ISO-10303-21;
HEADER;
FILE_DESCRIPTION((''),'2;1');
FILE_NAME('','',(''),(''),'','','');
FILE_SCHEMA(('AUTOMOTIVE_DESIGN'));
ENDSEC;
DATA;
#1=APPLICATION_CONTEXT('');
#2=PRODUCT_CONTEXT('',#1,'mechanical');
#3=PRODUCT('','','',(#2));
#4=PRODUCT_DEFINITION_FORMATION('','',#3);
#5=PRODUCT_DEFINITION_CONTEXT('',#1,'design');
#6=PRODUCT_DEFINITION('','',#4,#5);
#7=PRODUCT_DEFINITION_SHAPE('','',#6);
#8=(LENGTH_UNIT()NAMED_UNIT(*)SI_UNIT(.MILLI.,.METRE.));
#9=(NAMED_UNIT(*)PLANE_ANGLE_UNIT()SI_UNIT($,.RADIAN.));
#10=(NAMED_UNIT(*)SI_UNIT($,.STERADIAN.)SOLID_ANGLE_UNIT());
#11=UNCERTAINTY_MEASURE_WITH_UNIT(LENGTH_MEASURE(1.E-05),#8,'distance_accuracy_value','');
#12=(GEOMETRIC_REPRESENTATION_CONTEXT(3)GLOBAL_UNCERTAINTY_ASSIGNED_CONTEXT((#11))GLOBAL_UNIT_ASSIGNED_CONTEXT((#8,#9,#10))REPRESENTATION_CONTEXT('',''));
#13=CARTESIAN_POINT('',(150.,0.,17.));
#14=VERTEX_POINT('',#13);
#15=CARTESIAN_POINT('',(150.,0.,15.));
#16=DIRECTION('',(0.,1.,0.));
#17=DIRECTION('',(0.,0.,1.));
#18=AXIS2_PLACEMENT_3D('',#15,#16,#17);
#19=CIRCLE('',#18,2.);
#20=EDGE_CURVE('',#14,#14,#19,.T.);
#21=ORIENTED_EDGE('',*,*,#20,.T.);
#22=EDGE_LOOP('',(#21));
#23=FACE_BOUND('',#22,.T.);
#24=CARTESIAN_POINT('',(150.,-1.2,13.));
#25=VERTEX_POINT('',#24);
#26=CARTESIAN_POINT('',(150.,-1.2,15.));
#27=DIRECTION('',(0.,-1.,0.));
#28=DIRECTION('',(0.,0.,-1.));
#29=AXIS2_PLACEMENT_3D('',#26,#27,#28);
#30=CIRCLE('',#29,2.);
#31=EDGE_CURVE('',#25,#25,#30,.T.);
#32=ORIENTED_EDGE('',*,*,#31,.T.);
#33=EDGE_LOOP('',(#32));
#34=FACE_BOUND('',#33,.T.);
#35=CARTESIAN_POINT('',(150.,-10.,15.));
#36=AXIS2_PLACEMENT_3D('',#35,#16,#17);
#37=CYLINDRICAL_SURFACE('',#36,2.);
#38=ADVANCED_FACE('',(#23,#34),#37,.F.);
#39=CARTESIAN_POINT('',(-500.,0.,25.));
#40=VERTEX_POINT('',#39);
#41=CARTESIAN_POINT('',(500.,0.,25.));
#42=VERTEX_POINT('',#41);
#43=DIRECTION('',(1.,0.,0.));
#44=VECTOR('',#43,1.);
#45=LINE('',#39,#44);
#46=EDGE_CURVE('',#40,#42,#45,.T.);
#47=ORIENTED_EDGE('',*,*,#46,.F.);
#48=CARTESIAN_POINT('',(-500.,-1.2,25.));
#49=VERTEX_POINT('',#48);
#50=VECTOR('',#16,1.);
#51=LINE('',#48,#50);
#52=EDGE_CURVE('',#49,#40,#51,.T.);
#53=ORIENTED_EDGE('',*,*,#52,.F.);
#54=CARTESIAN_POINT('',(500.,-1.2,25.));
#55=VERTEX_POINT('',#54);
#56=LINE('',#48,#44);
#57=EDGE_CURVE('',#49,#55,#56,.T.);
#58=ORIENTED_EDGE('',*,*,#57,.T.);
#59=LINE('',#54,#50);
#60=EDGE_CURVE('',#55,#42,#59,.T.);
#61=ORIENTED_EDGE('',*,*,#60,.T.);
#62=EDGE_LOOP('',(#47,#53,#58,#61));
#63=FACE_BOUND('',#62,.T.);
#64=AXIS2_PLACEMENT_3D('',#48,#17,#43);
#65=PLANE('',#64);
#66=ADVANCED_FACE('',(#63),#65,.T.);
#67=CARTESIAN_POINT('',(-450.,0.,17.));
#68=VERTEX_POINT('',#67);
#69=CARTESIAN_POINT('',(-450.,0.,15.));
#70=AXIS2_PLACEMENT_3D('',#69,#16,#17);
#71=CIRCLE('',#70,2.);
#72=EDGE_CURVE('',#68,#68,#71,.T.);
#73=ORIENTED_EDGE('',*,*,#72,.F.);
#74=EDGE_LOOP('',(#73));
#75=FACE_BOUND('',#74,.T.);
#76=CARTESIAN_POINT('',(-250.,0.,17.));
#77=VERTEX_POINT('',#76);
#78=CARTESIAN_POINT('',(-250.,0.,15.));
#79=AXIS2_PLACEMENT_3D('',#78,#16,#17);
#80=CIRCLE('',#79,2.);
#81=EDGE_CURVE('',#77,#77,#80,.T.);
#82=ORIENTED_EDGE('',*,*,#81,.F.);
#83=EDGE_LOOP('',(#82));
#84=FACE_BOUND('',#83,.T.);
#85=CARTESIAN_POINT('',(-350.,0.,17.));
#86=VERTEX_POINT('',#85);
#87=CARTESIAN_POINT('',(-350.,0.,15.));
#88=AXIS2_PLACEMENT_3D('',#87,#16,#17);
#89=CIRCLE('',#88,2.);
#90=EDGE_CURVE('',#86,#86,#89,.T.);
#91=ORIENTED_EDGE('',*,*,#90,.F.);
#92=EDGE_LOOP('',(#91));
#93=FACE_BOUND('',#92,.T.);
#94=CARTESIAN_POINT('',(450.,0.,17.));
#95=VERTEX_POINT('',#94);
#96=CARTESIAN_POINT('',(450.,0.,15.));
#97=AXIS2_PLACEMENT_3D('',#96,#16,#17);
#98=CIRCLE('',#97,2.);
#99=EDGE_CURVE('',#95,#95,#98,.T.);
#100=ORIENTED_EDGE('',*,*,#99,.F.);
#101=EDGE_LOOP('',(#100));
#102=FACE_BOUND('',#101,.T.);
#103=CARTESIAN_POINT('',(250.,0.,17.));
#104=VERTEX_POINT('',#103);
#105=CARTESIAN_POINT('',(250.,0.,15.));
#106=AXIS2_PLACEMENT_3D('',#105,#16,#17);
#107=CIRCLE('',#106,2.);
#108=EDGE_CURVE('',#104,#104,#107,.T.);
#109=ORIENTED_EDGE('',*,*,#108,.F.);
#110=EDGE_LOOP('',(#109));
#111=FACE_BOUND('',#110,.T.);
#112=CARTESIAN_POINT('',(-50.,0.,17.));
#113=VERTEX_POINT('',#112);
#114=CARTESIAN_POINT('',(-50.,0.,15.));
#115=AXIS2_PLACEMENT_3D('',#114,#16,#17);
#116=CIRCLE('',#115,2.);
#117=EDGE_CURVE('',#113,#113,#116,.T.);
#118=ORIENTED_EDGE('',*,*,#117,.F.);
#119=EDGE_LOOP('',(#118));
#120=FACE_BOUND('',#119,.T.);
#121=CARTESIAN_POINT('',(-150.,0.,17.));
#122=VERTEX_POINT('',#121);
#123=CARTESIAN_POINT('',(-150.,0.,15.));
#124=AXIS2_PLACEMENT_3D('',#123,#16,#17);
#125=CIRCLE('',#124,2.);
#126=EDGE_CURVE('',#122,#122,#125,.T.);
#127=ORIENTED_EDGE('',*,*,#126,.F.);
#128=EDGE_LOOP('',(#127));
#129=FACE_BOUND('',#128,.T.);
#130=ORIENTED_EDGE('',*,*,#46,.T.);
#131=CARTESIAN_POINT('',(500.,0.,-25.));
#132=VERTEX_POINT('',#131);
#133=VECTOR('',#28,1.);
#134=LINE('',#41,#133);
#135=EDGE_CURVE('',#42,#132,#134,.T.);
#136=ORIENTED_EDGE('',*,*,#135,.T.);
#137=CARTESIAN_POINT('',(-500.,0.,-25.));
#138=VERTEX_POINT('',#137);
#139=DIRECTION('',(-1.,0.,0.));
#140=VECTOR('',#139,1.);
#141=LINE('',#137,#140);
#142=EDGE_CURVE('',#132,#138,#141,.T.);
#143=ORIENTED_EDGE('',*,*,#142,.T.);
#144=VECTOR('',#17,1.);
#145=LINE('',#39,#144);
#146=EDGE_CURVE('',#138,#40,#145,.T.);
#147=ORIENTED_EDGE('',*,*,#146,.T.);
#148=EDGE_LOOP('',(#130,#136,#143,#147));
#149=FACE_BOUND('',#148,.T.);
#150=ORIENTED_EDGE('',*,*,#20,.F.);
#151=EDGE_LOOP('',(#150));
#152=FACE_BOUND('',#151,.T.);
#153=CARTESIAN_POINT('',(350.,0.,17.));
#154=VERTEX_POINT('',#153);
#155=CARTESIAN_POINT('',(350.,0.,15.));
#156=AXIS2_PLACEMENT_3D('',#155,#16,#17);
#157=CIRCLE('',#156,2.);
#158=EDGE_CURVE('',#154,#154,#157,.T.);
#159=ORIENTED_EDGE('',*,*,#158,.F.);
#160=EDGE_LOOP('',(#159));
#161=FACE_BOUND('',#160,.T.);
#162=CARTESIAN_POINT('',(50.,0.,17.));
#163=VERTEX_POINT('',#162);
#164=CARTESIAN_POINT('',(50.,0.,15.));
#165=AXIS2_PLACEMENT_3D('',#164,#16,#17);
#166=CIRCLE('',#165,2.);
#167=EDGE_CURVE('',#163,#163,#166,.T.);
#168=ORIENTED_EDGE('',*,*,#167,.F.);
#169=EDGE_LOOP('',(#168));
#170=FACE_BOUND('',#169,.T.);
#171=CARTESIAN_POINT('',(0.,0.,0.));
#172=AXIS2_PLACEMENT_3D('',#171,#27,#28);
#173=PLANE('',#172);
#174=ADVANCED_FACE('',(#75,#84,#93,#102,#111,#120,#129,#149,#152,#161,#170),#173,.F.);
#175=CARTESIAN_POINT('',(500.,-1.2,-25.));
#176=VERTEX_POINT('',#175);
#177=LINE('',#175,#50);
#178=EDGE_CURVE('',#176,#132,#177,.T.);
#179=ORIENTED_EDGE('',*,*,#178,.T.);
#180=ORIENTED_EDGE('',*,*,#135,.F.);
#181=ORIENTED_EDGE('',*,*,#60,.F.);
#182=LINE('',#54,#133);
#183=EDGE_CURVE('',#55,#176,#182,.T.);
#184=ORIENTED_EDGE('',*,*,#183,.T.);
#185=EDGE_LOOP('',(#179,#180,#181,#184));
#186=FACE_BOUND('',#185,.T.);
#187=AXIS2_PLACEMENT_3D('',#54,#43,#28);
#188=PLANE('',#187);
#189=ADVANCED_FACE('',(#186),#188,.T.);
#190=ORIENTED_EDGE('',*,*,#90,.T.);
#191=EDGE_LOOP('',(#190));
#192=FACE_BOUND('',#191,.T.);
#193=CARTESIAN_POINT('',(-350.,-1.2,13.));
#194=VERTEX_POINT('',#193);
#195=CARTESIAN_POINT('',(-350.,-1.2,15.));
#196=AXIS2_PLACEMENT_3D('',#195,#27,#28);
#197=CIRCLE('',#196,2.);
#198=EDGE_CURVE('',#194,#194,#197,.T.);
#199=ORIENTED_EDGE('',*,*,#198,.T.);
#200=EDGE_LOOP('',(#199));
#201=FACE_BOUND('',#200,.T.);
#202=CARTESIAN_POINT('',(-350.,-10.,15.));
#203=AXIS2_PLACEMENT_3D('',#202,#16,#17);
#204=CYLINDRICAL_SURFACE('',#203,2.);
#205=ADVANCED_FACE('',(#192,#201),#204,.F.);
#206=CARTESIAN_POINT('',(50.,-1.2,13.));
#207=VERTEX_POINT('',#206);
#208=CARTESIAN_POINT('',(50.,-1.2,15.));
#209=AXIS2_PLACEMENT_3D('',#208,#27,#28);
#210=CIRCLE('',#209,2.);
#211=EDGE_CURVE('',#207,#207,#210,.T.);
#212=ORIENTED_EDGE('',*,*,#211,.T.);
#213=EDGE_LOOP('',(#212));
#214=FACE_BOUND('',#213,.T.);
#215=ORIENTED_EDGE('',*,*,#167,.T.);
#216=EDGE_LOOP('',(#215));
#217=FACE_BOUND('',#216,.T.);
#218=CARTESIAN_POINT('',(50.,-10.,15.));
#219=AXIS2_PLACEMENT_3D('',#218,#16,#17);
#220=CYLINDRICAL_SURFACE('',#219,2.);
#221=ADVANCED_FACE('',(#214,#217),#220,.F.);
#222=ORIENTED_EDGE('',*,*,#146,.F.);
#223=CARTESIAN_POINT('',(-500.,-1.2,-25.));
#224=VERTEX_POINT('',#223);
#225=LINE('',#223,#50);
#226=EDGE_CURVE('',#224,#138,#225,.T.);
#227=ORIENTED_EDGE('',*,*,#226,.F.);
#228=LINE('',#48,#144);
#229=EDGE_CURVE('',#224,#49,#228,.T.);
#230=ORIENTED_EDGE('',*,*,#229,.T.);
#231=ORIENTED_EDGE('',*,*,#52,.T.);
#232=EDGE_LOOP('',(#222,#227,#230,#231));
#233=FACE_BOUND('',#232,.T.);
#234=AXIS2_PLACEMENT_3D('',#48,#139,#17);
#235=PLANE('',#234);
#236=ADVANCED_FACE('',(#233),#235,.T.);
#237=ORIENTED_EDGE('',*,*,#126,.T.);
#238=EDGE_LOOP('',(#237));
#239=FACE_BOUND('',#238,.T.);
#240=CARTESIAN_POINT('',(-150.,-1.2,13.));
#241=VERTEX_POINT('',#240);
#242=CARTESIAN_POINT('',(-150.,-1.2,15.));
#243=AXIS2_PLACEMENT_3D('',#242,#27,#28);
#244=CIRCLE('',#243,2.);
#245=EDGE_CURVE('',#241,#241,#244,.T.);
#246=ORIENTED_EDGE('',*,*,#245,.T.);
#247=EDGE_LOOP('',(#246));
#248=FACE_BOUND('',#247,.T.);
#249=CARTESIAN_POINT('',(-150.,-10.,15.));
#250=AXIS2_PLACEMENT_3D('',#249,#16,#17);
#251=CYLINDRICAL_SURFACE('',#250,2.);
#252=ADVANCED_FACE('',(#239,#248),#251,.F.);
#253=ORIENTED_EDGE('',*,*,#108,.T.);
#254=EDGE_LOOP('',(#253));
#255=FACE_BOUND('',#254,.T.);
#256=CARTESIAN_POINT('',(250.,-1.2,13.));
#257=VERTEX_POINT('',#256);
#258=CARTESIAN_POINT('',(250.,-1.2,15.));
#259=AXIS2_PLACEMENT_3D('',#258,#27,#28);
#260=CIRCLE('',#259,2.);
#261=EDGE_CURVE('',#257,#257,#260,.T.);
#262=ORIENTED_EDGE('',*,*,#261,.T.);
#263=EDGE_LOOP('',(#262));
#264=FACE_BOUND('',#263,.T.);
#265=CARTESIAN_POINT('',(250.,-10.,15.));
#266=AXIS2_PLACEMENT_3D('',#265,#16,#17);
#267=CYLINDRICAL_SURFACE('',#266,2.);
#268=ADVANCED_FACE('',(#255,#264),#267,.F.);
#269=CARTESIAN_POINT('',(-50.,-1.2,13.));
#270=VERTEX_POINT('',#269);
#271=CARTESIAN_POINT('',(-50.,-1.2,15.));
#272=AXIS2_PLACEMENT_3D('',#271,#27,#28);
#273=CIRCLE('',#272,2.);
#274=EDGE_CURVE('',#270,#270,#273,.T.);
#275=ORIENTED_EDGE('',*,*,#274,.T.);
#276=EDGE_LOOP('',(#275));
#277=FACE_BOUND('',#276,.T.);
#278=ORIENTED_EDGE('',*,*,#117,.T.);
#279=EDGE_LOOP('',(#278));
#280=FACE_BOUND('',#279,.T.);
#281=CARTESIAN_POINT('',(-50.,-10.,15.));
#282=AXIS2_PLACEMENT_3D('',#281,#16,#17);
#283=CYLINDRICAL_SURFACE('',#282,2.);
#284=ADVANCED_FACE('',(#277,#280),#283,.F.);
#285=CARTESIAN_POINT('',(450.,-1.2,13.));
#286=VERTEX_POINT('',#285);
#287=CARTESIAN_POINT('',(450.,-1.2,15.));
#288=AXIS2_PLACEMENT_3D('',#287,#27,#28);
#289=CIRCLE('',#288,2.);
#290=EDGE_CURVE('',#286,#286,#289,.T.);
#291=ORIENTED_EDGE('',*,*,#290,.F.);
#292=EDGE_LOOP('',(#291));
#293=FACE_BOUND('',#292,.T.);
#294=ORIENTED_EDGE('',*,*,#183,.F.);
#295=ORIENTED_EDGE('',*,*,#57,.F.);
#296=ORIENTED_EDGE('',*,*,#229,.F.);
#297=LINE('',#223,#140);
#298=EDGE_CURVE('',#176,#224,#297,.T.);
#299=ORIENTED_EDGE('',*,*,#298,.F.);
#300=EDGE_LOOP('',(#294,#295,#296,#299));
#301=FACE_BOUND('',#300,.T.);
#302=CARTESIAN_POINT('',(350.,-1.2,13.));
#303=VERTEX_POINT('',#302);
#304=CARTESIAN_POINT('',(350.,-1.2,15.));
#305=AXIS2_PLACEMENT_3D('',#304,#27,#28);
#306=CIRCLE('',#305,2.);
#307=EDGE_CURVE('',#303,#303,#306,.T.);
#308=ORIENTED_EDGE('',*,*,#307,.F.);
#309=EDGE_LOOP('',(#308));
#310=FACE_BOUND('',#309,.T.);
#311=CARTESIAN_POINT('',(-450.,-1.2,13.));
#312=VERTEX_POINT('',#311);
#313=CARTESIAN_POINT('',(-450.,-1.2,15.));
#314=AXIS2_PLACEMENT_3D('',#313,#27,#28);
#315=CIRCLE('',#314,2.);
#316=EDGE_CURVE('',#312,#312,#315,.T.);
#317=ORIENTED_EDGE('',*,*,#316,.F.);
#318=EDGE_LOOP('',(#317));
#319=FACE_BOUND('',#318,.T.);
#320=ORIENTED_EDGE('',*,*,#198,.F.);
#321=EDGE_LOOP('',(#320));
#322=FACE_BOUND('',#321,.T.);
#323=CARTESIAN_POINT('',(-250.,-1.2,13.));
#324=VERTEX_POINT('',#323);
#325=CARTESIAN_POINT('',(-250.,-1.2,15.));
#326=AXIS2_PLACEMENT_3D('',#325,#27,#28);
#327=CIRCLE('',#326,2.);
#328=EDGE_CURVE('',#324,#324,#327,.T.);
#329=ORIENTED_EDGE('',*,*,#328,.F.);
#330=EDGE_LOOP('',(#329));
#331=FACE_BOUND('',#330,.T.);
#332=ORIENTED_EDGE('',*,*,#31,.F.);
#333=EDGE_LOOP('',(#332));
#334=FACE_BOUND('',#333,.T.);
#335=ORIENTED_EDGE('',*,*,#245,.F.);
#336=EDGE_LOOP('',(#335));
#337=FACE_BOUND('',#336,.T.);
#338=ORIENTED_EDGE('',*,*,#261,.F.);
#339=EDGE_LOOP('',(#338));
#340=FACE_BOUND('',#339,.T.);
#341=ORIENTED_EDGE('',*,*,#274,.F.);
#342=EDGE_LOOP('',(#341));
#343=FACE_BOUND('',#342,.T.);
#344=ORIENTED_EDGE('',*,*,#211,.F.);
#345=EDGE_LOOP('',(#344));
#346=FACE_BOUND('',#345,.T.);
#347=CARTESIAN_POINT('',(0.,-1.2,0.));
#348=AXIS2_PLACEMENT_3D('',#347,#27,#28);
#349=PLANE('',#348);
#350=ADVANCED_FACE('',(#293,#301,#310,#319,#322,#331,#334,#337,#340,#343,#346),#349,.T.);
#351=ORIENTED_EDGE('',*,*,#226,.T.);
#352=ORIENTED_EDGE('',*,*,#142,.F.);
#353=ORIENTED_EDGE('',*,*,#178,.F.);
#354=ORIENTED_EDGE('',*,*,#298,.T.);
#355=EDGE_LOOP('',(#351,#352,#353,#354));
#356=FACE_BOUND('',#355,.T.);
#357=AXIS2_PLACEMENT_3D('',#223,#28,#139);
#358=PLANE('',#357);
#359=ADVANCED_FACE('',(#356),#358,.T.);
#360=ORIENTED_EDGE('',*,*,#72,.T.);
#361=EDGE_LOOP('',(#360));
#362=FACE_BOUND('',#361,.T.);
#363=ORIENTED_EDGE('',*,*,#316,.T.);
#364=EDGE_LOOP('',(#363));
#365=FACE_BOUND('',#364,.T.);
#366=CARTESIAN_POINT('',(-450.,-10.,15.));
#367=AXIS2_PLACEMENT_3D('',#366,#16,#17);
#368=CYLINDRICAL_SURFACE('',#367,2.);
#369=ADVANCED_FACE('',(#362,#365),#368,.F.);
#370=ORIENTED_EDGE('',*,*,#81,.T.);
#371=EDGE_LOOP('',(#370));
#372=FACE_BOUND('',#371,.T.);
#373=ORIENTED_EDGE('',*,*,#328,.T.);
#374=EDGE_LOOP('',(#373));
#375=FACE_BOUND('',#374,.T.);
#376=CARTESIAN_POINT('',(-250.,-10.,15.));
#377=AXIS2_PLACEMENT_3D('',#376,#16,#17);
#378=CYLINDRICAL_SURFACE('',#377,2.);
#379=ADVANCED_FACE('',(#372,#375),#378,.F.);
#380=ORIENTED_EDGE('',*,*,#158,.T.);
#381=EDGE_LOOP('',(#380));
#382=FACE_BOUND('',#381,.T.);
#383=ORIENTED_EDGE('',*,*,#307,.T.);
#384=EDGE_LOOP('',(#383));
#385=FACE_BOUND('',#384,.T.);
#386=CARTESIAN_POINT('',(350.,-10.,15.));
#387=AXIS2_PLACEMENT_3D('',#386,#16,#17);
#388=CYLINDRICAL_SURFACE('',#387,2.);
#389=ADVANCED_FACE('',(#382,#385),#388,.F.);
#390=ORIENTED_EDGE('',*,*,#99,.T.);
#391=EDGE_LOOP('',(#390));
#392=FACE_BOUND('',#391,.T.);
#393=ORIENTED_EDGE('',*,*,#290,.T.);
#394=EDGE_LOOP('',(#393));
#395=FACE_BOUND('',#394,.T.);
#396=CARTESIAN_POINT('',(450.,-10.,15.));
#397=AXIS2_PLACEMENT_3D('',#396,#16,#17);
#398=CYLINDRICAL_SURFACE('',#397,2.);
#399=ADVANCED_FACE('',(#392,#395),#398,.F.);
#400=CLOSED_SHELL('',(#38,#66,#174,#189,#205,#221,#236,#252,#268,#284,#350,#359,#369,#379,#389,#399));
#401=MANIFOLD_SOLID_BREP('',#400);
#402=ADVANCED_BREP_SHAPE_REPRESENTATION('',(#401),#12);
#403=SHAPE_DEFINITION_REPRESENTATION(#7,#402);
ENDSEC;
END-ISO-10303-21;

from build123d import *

# Parameters (mm, degrees)
SKETCH1_W          = 1000
SKETCH1_H          = 50
BASE_FLANGE1_DEPTH = 1.2
SKETCH2_R          = 2
CUT_EXTRUDE1_DEPTH = 10


# Sheet-metal steps are written as plain solids
with BuildPart() as part:
    # Sketch1 → Base-Flange1 (new body)
    with BuildSketch(Plane(origin=(0, 0, 0), x_dir=(1, 0, 0), z_dir=(0, 1, 0))):
        Rectangle(SKETCH1_W, SKETCH1_H)
    extrude(amount=-BASE_FLANGE1_DEPTH)

    # Sketch2 → Cut-Extrude1 (cut)
    with BuildSketch(Plane(origin=(0, 0, 0), x_dir=(1, 0, 0), z_dir=(0, 1, 0))):
        with Locations(Location((-450, -15, 0), (0, 0, 270))):
            Circle(SKETCH2_R)
        with Locations(Location((-350, -15, 0), (0, 0, 270))):
            Circle(SKETCH2_R)
        with Locations(Location((-250, -15, 0), (0, 0, 270))):
            Circle(SKETCH2_R)
        with Locations(Location((-150, -15, 0), (0, 0, 270))):
            Circle(SKETCH2_R)
        with Locations(Location((-50, -15, 0), (0, 0, 270))):
            Circle(SKETCH2_R)
        with Locations(Location((50, -15, 0), (0, 0, 270))):
            Circle(SKETCH2_R)
        with Locations(Location((150, -15, 0), (0, 0, 270))):
            Circle(SKETCH2_R)
        with Locations(Location((250, -15, 0), (0, 0, 270))):
            Circle(SKETCH2_R)
        with Locations(Location((350, -15, 0), (0, 0, 270))):
            Circle(SKETCH2_R)
        with Locations(Location((450, -15, 0), (0, 0, 270))):
            Circle(SKETCH2_R)
    extrude(amount=-CUT_EXTRUDE1_DEPTH, mode=Mode.SUBTRACT)


solid = part.part
